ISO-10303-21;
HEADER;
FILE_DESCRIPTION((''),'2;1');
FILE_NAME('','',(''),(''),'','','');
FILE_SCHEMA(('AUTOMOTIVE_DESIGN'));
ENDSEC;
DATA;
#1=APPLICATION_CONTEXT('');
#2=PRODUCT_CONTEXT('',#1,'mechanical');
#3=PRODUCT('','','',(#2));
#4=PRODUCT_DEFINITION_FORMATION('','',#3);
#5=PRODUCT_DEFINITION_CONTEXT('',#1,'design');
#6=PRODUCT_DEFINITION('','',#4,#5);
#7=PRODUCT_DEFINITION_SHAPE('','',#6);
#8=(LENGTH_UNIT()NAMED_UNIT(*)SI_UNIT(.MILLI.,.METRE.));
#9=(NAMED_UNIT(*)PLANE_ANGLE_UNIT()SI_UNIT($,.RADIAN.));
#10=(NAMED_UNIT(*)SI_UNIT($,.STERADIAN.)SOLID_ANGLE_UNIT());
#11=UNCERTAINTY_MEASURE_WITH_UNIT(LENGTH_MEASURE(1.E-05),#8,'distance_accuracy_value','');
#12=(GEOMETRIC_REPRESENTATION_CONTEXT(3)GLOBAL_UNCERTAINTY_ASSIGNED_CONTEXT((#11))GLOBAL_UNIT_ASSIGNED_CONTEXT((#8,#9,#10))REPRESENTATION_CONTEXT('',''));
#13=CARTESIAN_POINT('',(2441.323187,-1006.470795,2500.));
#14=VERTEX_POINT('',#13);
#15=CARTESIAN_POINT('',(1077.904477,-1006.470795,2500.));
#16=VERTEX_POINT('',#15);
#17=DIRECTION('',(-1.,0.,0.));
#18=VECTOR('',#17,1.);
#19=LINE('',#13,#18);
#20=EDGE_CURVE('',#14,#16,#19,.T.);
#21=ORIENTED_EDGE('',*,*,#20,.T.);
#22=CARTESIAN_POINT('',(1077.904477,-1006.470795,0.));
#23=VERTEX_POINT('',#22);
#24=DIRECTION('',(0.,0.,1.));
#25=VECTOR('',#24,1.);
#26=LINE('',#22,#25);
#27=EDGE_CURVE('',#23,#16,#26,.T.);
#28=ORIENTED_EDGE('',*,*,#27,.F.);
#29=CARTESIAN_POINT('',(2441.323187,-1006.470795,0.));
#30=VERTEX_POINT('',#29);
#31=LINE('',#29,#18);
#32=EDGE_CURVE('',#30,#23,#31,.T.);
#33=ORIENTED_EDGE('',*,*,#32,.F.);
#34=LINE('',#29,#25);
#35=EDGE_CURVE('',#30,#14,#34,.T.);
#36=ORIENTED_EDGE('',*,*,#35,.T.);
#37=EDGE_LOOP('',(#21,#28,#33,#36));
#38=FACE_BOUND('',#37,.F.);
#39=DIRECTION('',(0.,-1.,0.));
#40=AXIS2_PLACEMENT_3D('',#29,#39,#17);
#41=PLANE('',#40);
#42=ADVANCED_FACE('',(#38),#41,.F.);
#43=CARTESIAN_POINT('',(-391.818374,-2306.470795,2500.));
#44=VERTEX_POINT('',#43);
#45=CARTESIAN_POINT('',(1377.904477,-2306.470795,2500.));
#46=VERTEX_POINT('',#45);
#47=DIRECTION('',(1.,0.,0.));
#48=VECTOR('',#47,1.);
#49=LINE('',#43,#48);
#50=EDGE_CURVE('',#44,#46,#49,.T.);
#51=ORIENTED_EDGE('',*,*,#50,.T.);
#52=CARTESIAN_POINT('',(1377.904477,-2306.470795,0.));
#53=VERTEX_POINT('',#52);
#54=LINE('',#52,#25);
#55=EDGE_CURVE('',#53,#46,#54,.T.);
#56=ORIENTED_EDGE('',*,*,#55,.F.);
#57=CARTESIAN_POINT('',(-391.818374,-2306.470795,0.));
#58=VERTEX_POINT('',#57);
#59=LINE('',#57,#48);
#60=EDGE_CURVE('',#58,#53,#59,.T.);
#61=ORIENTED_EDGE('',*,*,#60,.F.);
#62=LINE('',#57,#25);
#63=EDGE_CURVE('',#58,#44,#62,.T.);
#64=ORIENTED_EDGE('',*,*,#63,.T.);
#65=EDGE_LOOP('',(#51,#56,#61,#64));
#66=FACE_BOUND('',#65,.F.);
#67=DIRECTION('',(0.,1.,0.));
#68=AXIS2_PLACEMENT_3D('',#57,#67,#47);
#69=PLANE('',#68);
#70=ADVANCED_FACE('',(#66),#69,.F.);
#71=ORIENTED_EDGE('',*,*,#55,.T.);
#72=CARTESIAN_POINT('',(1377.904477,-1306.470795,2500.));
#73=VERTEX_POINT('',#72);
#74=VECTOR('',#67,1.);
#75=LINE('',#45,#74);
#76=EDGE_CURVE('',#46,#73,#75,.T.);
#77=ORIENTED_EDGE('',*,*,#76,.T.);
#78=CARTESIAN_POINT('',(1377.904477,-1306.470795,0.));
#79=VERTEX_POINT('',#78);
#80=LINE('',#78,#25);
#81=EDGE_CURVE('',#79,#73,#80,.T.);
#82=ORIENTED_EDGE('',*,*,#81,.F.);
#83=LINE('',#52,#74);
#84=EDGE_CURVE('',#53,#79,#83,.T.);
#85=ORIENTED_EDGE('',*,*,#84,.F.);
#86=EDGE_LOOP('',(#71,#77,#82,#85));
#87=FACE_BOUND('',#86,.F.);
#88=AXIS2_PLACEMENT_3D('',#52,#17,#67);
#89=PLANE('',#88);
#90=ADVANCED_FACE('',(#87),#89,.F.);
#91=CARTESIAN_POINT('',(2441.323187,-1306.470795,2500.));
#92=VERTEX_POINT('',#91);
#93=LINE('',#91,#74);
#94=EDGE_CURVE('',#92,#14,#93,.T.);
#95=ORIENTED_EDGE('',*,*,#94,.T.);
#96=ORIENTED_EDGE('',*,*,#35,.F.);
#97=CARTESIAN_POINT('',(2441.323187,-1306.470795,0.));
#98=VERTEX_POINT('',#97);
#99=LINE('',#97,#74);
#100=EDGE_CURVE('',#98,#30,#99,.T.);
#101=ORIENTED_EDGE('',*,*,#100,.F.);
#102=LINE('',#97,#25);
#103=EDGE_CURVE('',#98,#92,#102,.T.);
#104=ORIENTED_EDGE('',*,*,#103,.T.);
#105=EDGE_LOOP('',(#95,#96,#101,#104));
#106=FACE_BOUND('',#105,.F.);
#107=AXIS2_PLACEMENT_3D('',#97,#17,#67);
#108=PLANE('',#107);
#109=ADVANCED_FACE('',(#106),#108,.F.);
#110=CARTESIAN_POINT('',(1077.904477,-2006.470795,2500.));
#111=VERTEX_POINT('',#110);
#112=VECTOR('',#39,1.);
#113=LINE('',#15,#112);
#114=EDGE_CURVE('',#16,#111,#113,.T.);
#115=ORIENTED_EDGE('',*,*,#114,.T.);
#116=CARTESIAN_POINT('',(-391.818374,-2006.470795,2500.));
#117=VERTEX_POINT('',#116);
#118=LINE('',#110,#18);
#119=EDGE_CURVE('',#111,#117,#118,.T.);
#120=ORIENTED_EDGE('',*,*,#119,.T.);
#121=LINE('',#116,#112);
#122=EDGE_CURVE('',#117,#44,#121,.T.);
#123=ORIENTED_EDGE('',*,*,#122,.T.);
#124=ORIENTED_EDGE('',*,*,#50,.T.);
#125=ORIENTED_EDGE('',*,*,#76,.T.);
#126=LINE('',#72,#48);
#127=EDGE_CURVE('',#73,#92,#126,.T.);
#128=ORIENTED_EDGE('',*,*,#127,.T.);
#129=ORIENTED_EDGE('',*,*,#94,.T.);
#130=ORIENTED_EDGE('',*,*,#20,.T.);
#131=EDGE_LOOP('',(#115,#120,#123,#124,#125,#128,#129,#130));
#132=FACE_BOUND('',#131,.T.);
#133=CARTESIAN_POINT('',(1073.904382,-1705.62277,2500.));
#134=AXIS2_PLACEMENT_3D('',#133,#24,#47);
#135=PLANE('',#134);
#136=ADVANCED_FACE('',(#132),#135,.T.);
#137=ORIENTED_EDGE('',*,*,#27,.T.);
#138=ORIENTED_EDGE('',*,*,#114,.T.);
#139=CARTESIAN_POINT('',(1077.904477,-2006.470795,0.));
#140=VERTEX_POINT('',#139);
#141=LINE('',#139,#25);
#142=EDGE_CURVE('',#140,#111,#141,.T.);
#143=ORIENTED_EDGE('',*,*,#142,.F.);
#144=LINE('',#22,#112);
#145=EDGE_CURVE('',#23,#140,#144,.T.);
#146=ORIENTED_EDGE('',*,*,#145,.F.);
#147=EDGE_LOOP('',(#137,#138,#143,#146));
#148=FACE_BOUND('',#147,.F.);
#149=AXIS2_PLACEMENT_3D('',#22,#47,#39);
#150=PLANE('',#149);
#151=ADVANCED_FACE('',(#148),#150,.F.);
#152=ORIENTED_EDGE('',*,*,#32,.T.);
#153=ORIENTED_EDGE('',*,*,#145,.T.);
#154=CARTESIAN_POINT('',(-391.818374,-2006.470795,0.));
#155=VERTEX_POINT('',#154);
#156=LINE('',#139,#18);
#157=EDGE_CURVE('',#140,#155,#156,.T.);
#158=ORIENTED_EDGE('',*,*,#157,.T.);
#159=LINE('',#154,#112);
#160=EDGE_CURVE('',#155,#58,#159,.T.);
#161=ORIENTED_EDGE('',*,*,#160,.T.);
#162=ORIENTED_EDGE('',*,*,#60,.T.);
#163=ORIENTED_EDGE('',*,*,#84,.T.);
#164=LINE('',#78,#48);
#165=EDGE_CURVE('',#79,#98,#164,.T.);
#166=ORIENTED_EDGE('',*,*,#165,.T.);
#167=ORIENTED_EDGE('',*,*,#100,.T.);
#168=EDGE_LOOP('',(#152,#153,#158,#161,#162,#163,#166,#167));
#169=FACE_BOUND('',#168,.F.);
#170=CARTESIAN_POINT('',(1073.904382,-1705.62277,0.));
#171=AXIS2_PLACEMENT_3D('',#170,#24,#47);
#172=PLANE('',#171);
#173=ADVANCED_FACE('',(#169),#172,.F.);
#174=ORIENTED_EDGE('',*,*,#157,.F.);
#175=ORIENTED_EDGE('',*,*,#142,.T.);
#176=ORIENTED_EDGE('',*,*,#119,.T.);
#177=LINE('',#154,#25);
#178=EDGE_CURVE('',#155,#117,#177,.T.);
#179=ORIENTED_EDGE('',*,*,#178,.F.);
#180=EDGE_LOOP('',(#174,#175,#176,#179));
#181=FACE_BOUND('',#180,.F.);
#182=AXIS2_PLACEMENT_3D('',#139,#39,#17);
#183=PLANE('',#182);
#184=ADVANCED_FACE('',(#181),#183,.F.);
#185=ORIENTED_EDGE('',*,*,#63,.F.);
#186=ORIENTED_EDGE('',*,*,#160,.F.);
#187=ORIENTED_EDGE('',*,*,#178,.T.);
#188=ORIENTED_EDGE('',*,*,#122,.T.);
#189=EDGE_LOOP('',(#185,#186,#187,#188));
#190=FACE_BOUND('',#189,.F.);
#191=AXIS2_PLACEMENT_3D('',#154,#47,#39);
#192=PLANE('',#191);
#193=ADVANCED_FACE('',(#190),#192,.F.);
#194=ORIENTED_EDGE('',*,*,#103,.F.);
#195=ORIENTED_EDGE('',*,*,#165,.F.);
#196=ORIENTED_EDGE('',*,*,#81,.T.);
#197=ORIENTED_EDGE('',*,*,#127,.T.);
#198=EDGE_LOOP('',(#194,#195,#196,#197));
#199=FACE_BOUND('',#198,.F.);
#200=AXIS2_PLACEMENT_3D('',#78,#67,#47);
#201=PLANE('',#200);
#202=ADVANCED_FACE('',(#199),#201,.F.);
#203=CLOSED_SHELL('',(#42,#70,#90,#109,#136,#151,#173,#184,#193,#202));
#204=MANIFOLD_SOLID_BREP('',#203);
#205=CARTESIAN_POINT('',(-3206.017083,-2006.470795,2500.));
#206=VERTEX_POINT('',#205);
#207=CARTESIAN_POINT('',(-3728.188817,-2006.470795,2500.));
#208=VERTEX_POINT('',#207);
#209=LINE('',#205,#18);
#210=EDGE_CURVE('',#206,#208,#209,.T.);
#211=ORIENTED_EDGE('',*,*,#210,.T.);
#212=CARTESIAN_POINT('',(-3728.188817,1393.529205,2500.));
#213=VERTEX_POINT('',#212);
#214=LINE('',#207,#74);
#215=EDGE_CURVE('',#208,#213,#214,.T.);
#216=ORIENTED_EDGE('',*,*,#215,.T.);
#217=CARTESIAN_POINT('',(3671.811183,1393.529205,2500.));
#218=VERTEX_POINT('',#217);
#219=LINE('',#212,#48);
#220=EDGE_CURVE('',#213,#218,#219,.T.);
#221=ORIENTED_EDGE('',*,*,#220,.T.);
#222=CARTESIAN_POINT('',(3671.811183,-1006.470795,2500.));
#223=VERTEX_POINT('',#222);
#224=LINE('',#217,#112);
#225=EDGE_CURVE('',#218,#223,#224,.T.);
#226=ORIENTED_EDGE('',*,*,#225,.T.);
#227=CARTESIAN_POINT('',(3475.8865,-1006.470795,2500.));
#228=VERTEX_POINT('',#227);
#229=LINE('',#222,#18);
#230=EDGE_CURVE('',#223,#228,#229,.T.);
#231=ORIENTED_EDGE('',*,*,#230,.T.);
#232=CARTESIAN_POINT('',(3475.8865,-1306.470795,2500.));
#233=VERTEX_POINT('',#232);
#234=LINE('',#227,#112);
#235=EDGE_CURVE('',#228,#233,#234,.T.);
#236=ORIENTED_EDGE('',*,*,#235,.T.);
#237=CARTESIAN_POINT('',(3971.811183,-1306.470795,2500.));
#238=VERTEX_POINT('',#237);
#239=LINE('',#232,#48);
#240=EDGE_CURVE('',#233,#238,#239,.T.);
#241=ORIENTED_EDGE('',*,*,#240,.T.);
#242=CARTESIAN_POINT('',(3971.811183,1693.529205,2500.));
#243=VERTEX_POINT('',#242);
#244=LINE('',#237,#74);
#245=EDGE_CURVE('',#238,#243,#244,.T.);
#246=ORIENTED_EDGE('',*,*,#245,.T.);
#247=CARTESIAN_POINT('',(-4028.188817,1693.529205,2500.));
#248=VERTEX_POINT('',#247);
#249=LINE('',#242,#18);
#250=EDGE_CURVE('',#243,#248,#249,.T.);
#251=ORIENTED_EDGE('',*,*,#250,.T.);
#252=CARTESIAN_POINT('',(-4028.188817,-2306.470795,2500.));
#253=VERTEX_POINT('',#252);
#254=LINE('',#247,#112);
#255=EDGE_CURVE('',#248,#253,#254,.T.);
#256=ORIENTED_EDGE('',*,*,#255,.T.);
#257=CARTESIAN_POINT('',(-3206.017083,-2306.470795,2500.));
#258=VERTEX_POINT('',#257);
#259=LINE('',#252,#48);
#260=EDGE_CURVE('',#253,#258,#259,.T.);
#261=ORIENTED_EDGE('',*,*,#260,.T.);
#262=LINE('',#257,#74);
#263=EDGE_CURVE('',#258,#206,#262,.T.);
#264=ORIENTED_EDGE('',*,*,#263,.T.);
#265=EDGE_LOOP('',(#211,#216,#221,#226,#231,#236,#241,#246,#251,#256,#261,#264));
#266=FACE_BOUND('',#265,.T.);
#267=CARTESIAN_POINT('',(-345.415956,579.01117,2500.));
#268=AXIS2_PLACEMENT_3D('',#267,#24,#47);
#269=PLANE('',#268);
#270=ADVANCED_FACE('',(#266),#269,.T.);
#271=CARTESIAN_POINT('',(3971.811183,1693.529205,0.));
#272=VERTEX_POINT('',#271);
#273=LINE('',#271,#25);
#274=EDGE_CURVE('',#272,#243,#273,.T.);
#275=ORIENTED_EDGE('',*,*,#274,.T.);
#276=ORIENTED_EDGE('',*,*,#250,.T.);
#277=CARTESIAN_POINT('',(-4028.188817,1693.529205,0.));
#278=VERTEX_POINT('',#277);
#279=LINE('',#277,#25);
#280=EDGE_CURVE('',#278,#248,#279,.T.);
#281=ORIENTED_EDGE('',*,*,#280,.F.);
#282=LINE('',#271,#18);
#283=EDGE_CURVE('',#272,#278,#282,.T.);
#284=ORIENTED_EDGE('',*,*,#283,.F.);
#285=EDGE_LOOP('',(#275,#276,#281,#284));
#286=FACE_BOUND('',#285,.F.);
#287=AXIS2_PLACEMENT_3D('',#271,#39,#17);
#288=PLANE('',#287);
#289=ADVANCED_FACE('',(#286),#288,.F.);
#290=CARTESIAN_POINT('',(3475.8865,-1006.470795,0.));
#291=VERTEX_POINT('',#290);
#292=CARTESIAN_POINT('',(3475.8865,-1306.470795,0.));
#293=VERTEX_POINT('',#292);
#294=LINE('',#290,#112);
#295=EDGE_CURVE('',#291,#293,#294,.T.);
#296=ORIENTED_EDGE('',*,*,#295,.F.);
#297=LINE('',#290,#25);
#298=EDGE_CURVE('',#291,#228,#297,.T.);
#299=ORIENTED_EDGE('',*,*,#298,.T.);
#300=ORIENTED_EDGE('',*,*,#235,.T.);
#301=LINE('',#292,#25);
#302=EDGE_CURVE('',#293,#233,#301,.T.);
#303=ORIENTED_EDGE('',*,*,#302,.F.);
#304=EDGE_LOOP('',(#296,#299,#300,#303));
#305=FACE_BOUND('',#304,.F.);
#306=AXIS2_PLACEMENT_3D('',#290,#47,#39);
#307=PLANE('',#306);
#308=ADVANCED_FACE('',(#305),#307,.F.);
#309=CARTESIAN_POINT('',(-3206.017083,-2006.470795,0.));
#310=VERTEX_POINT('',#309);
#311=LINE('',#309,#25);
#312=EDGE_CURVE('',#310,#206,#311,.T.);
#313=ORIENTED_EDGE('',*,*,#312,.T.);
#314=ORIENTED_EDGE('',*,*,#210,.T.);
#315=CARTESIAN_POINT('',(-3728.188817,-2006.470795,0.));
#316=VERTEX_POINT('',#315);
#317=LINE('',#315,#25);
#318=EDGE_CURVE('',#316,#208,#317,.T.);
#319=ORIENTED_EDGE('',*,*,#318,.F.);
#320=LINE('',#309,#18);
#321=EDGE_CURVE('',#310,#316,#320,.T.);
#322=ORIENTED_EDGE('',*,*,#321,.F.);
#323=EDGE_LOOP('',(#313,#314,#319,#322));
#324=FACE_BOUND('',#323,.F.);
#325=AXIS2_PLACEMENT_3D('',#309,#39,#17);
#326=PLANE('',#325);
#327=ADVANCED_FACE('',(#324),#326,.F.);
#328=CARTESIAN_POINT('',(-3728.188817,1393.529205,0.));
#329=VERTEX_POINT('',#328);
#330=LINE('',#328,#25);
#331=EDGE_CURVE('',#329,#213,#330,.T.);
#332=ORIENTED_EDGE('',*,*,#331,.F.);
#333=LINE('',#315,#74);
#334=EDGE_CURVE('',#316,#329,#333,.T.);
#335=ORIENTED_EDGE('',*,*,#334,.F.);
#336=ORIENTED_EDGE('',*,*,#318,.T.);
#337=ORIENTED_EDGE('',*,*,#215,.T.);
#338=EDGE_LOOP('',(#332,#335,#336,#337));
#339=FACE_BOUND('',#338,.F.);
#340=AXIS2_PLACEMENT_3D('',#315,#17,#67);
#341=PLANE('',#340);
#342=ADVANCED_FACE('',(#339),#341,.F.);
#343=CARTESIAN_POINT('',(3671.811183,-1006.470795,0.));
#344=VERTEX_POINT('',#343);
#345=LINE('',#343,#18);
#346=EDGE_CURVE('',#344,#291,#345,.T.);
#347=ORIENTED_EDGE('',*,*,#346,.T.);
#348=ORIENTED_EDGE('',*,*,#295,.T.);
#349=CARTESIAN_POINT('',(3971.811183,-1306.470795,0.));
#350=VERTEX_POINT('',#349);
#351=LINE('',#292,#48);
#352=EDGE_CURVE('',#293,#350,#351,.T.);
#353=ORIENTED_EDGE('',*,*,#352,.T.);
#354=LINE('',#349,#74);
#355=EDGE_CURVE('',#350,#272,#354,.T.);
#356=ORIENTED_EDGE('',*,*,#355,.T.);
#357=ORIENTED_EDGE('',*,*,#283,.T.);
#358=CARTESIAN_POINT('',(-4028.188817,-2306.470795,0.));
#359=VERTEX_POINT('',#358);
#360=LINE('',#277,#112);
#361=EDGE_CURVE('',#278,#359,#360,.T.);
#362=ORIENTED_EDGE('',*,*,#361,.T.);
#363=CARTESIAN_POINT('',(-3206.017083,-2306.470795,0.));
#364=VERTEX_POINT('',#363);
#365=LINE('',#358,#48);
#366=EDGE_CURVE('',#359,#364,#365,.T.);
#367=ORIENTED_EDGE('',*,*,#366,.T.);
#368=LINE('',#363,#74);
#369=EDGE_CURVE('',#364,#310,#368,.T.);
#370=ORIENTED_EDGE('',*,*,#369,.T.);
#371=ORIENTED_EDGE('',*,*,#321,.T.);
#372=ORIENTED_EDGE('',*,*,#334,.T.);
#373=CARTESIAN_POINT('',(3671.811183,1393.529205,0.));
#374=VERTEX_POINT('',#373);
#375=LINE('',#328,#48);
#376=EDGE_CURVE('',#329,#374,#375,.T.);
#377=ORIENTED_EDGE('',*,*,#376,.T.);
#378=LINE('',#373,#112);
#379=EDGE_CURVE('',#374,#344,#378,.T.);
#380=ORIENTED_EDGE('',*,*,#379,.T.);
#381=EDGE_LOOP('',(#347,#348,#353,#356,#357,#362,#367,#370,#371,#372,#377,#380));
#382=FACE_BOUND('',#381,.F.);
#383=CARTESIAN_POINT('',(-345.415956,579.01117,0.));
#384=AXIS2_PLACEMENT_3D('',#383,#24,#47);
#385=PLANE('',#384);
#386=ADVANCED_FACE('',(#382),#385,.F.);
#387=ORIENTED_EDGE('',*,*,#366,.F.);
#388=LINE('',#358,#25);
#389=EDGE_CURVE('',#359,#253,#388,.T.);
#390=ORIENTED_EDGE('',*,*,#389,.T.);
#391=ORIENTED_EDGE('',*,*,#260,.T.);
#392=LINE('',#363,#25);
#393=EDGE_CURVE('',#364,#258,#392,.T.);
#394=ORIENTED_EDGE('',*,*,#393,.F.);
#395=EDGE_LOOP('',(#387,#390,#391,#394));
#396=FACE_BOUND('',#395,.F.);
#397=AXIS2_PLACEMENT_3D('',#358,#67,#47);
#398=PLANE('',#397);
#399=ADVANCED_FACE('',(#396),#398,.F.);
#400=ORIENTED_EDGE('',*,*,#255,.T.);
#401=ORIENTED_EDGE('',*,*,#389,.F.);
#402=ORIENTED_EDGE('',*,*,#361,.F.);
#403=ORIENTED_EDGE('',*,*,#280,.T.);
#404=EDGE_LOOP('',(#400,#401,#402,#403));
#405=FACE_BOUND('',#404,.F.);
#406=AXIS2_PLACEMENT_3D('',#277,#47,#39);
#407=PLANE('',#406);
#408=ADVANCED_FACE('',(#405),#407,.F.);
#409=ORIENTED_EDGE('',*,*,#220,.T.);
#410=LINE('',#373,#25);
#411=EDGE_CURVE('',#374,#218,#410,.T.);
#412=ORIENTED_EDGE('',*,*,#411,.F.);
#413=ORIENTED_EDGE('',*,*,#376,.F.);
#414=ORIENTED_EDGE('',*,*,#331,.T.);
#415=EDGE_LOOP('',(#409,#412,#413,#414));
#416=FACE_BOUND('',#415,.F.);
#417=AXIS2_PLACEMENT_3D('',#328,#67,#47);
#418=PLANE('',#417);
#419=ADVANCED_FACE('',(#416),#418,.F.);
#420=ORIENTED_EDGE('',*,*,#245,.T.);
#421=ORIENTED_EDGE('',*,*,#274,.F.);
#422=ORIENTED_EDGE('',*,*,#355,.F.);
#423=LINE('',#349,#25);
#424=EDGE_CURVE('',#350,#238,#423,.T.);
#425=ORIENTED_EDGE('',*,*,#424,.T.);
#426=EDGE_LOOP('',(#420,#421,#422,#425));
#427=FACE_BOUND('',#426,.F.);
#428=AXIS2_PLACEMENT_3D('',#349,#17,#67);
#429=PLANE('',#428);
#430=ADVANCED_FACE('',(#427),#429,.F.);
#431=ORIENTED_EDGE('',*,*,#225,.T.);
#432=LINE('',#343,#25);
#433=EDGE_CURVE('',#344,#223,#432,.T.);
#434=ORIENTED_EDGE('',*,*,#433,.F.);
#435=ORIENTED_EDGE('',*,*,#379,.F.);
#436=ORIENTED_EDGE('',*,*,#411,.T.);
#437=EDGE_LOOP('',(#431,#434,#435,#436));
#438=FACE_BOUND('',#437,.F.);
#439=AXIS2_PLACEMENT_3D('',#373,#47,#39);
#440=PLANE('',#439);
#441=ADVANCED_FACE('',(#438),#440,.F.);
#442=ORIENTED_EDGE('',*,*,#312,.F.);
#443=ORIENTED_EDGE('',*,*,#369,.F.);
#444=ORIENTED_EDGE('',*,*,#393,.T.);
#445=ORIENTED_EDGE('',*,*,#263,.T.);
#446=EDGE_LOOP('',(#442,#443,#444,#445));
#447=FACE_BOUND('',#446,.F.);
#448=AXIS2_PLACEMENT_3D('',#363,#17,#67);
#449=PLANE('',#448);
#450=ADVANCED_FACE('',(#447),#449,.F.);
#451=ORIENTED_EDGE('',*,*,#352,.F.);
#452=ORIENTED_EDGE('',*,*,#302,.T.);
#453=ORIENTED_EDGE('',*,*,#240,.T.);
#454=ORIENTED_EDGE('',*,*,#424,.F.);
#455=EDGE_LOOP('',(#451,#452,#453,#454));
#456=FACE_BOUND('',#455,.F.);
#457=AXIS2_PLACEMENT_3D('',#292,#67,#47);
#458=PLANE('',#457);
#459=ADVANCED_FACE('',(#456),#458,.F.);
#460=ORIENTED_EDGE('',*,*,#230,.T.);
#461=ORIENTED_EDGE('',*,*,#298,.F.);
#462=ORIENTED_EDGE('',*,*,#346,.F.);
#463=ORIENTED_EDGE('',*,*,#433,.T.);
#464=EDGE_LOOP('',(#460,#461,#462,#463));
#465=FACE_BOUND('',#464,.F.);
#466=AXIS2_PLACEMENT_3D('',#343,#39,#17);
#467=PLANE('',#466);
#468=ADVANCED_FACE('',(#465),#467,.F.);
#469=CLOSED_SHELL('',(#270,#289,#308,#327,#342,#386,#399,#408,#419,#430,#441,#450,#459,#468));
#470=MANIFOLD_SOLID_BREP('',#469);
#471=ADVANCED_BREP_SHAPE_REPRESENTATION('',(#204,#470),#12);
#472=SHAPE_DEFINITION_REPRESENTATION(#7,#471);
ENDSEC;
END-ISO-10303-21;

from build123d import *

# Parameters (mm, degrees)
F1_DEPTH = 2500


# Not quite as in the source:
# - a feature of the source that left no trace in its solid (it failed there, or was rolled back) is left out


with BuildPart() as f1:
    # F0 (on Top) → F1 (new body)
    with BuildSketch(Plane.XY):
        Polygon((3971.811182797, 1693.5292053778), (-4028.188817203, 1693.5292053778), (-4028.188817203, -2306.4707946222), (-3206.0170832425, -2306.4707946222), (-3206.0170832425, -2006.4707946222), (-3728.188817203, -2006.4707946222), (-3728.188817203, 1393.5292053778), (3671.811182797, 1393.5292053778), (3671.811182797, -1006.4707946222), (3475.8865002422, -1006.4707946222), (3475.8865002422, -1306.4707946222), (3971.811182797, -1306.4707946222), align=None)
    extrude(amount=F1_DEPTH)


with BuildPart() as f1b:
    # F0 (on Top) → F1, piece 2 (new body)
    with BuildSketch(Plane.XY):
        Polygon((1377.9044771042, -1306.4707946222), (2441.3231871367, -1306.4707946222), (2441.3231871367, -1006.4707946222), (1077.9044771042, -1006.4707946222), (1077.9044771042, -2006.4707946222), (-391.8183739582, -2006.4707946222), (-391.8183739582, -2306.4707946222), (1377.9044771042, -2306.4707946222), align=None)
    extrude(amount=F1_DEPTH)


solid = Compound([f1.part, f1b.part])
